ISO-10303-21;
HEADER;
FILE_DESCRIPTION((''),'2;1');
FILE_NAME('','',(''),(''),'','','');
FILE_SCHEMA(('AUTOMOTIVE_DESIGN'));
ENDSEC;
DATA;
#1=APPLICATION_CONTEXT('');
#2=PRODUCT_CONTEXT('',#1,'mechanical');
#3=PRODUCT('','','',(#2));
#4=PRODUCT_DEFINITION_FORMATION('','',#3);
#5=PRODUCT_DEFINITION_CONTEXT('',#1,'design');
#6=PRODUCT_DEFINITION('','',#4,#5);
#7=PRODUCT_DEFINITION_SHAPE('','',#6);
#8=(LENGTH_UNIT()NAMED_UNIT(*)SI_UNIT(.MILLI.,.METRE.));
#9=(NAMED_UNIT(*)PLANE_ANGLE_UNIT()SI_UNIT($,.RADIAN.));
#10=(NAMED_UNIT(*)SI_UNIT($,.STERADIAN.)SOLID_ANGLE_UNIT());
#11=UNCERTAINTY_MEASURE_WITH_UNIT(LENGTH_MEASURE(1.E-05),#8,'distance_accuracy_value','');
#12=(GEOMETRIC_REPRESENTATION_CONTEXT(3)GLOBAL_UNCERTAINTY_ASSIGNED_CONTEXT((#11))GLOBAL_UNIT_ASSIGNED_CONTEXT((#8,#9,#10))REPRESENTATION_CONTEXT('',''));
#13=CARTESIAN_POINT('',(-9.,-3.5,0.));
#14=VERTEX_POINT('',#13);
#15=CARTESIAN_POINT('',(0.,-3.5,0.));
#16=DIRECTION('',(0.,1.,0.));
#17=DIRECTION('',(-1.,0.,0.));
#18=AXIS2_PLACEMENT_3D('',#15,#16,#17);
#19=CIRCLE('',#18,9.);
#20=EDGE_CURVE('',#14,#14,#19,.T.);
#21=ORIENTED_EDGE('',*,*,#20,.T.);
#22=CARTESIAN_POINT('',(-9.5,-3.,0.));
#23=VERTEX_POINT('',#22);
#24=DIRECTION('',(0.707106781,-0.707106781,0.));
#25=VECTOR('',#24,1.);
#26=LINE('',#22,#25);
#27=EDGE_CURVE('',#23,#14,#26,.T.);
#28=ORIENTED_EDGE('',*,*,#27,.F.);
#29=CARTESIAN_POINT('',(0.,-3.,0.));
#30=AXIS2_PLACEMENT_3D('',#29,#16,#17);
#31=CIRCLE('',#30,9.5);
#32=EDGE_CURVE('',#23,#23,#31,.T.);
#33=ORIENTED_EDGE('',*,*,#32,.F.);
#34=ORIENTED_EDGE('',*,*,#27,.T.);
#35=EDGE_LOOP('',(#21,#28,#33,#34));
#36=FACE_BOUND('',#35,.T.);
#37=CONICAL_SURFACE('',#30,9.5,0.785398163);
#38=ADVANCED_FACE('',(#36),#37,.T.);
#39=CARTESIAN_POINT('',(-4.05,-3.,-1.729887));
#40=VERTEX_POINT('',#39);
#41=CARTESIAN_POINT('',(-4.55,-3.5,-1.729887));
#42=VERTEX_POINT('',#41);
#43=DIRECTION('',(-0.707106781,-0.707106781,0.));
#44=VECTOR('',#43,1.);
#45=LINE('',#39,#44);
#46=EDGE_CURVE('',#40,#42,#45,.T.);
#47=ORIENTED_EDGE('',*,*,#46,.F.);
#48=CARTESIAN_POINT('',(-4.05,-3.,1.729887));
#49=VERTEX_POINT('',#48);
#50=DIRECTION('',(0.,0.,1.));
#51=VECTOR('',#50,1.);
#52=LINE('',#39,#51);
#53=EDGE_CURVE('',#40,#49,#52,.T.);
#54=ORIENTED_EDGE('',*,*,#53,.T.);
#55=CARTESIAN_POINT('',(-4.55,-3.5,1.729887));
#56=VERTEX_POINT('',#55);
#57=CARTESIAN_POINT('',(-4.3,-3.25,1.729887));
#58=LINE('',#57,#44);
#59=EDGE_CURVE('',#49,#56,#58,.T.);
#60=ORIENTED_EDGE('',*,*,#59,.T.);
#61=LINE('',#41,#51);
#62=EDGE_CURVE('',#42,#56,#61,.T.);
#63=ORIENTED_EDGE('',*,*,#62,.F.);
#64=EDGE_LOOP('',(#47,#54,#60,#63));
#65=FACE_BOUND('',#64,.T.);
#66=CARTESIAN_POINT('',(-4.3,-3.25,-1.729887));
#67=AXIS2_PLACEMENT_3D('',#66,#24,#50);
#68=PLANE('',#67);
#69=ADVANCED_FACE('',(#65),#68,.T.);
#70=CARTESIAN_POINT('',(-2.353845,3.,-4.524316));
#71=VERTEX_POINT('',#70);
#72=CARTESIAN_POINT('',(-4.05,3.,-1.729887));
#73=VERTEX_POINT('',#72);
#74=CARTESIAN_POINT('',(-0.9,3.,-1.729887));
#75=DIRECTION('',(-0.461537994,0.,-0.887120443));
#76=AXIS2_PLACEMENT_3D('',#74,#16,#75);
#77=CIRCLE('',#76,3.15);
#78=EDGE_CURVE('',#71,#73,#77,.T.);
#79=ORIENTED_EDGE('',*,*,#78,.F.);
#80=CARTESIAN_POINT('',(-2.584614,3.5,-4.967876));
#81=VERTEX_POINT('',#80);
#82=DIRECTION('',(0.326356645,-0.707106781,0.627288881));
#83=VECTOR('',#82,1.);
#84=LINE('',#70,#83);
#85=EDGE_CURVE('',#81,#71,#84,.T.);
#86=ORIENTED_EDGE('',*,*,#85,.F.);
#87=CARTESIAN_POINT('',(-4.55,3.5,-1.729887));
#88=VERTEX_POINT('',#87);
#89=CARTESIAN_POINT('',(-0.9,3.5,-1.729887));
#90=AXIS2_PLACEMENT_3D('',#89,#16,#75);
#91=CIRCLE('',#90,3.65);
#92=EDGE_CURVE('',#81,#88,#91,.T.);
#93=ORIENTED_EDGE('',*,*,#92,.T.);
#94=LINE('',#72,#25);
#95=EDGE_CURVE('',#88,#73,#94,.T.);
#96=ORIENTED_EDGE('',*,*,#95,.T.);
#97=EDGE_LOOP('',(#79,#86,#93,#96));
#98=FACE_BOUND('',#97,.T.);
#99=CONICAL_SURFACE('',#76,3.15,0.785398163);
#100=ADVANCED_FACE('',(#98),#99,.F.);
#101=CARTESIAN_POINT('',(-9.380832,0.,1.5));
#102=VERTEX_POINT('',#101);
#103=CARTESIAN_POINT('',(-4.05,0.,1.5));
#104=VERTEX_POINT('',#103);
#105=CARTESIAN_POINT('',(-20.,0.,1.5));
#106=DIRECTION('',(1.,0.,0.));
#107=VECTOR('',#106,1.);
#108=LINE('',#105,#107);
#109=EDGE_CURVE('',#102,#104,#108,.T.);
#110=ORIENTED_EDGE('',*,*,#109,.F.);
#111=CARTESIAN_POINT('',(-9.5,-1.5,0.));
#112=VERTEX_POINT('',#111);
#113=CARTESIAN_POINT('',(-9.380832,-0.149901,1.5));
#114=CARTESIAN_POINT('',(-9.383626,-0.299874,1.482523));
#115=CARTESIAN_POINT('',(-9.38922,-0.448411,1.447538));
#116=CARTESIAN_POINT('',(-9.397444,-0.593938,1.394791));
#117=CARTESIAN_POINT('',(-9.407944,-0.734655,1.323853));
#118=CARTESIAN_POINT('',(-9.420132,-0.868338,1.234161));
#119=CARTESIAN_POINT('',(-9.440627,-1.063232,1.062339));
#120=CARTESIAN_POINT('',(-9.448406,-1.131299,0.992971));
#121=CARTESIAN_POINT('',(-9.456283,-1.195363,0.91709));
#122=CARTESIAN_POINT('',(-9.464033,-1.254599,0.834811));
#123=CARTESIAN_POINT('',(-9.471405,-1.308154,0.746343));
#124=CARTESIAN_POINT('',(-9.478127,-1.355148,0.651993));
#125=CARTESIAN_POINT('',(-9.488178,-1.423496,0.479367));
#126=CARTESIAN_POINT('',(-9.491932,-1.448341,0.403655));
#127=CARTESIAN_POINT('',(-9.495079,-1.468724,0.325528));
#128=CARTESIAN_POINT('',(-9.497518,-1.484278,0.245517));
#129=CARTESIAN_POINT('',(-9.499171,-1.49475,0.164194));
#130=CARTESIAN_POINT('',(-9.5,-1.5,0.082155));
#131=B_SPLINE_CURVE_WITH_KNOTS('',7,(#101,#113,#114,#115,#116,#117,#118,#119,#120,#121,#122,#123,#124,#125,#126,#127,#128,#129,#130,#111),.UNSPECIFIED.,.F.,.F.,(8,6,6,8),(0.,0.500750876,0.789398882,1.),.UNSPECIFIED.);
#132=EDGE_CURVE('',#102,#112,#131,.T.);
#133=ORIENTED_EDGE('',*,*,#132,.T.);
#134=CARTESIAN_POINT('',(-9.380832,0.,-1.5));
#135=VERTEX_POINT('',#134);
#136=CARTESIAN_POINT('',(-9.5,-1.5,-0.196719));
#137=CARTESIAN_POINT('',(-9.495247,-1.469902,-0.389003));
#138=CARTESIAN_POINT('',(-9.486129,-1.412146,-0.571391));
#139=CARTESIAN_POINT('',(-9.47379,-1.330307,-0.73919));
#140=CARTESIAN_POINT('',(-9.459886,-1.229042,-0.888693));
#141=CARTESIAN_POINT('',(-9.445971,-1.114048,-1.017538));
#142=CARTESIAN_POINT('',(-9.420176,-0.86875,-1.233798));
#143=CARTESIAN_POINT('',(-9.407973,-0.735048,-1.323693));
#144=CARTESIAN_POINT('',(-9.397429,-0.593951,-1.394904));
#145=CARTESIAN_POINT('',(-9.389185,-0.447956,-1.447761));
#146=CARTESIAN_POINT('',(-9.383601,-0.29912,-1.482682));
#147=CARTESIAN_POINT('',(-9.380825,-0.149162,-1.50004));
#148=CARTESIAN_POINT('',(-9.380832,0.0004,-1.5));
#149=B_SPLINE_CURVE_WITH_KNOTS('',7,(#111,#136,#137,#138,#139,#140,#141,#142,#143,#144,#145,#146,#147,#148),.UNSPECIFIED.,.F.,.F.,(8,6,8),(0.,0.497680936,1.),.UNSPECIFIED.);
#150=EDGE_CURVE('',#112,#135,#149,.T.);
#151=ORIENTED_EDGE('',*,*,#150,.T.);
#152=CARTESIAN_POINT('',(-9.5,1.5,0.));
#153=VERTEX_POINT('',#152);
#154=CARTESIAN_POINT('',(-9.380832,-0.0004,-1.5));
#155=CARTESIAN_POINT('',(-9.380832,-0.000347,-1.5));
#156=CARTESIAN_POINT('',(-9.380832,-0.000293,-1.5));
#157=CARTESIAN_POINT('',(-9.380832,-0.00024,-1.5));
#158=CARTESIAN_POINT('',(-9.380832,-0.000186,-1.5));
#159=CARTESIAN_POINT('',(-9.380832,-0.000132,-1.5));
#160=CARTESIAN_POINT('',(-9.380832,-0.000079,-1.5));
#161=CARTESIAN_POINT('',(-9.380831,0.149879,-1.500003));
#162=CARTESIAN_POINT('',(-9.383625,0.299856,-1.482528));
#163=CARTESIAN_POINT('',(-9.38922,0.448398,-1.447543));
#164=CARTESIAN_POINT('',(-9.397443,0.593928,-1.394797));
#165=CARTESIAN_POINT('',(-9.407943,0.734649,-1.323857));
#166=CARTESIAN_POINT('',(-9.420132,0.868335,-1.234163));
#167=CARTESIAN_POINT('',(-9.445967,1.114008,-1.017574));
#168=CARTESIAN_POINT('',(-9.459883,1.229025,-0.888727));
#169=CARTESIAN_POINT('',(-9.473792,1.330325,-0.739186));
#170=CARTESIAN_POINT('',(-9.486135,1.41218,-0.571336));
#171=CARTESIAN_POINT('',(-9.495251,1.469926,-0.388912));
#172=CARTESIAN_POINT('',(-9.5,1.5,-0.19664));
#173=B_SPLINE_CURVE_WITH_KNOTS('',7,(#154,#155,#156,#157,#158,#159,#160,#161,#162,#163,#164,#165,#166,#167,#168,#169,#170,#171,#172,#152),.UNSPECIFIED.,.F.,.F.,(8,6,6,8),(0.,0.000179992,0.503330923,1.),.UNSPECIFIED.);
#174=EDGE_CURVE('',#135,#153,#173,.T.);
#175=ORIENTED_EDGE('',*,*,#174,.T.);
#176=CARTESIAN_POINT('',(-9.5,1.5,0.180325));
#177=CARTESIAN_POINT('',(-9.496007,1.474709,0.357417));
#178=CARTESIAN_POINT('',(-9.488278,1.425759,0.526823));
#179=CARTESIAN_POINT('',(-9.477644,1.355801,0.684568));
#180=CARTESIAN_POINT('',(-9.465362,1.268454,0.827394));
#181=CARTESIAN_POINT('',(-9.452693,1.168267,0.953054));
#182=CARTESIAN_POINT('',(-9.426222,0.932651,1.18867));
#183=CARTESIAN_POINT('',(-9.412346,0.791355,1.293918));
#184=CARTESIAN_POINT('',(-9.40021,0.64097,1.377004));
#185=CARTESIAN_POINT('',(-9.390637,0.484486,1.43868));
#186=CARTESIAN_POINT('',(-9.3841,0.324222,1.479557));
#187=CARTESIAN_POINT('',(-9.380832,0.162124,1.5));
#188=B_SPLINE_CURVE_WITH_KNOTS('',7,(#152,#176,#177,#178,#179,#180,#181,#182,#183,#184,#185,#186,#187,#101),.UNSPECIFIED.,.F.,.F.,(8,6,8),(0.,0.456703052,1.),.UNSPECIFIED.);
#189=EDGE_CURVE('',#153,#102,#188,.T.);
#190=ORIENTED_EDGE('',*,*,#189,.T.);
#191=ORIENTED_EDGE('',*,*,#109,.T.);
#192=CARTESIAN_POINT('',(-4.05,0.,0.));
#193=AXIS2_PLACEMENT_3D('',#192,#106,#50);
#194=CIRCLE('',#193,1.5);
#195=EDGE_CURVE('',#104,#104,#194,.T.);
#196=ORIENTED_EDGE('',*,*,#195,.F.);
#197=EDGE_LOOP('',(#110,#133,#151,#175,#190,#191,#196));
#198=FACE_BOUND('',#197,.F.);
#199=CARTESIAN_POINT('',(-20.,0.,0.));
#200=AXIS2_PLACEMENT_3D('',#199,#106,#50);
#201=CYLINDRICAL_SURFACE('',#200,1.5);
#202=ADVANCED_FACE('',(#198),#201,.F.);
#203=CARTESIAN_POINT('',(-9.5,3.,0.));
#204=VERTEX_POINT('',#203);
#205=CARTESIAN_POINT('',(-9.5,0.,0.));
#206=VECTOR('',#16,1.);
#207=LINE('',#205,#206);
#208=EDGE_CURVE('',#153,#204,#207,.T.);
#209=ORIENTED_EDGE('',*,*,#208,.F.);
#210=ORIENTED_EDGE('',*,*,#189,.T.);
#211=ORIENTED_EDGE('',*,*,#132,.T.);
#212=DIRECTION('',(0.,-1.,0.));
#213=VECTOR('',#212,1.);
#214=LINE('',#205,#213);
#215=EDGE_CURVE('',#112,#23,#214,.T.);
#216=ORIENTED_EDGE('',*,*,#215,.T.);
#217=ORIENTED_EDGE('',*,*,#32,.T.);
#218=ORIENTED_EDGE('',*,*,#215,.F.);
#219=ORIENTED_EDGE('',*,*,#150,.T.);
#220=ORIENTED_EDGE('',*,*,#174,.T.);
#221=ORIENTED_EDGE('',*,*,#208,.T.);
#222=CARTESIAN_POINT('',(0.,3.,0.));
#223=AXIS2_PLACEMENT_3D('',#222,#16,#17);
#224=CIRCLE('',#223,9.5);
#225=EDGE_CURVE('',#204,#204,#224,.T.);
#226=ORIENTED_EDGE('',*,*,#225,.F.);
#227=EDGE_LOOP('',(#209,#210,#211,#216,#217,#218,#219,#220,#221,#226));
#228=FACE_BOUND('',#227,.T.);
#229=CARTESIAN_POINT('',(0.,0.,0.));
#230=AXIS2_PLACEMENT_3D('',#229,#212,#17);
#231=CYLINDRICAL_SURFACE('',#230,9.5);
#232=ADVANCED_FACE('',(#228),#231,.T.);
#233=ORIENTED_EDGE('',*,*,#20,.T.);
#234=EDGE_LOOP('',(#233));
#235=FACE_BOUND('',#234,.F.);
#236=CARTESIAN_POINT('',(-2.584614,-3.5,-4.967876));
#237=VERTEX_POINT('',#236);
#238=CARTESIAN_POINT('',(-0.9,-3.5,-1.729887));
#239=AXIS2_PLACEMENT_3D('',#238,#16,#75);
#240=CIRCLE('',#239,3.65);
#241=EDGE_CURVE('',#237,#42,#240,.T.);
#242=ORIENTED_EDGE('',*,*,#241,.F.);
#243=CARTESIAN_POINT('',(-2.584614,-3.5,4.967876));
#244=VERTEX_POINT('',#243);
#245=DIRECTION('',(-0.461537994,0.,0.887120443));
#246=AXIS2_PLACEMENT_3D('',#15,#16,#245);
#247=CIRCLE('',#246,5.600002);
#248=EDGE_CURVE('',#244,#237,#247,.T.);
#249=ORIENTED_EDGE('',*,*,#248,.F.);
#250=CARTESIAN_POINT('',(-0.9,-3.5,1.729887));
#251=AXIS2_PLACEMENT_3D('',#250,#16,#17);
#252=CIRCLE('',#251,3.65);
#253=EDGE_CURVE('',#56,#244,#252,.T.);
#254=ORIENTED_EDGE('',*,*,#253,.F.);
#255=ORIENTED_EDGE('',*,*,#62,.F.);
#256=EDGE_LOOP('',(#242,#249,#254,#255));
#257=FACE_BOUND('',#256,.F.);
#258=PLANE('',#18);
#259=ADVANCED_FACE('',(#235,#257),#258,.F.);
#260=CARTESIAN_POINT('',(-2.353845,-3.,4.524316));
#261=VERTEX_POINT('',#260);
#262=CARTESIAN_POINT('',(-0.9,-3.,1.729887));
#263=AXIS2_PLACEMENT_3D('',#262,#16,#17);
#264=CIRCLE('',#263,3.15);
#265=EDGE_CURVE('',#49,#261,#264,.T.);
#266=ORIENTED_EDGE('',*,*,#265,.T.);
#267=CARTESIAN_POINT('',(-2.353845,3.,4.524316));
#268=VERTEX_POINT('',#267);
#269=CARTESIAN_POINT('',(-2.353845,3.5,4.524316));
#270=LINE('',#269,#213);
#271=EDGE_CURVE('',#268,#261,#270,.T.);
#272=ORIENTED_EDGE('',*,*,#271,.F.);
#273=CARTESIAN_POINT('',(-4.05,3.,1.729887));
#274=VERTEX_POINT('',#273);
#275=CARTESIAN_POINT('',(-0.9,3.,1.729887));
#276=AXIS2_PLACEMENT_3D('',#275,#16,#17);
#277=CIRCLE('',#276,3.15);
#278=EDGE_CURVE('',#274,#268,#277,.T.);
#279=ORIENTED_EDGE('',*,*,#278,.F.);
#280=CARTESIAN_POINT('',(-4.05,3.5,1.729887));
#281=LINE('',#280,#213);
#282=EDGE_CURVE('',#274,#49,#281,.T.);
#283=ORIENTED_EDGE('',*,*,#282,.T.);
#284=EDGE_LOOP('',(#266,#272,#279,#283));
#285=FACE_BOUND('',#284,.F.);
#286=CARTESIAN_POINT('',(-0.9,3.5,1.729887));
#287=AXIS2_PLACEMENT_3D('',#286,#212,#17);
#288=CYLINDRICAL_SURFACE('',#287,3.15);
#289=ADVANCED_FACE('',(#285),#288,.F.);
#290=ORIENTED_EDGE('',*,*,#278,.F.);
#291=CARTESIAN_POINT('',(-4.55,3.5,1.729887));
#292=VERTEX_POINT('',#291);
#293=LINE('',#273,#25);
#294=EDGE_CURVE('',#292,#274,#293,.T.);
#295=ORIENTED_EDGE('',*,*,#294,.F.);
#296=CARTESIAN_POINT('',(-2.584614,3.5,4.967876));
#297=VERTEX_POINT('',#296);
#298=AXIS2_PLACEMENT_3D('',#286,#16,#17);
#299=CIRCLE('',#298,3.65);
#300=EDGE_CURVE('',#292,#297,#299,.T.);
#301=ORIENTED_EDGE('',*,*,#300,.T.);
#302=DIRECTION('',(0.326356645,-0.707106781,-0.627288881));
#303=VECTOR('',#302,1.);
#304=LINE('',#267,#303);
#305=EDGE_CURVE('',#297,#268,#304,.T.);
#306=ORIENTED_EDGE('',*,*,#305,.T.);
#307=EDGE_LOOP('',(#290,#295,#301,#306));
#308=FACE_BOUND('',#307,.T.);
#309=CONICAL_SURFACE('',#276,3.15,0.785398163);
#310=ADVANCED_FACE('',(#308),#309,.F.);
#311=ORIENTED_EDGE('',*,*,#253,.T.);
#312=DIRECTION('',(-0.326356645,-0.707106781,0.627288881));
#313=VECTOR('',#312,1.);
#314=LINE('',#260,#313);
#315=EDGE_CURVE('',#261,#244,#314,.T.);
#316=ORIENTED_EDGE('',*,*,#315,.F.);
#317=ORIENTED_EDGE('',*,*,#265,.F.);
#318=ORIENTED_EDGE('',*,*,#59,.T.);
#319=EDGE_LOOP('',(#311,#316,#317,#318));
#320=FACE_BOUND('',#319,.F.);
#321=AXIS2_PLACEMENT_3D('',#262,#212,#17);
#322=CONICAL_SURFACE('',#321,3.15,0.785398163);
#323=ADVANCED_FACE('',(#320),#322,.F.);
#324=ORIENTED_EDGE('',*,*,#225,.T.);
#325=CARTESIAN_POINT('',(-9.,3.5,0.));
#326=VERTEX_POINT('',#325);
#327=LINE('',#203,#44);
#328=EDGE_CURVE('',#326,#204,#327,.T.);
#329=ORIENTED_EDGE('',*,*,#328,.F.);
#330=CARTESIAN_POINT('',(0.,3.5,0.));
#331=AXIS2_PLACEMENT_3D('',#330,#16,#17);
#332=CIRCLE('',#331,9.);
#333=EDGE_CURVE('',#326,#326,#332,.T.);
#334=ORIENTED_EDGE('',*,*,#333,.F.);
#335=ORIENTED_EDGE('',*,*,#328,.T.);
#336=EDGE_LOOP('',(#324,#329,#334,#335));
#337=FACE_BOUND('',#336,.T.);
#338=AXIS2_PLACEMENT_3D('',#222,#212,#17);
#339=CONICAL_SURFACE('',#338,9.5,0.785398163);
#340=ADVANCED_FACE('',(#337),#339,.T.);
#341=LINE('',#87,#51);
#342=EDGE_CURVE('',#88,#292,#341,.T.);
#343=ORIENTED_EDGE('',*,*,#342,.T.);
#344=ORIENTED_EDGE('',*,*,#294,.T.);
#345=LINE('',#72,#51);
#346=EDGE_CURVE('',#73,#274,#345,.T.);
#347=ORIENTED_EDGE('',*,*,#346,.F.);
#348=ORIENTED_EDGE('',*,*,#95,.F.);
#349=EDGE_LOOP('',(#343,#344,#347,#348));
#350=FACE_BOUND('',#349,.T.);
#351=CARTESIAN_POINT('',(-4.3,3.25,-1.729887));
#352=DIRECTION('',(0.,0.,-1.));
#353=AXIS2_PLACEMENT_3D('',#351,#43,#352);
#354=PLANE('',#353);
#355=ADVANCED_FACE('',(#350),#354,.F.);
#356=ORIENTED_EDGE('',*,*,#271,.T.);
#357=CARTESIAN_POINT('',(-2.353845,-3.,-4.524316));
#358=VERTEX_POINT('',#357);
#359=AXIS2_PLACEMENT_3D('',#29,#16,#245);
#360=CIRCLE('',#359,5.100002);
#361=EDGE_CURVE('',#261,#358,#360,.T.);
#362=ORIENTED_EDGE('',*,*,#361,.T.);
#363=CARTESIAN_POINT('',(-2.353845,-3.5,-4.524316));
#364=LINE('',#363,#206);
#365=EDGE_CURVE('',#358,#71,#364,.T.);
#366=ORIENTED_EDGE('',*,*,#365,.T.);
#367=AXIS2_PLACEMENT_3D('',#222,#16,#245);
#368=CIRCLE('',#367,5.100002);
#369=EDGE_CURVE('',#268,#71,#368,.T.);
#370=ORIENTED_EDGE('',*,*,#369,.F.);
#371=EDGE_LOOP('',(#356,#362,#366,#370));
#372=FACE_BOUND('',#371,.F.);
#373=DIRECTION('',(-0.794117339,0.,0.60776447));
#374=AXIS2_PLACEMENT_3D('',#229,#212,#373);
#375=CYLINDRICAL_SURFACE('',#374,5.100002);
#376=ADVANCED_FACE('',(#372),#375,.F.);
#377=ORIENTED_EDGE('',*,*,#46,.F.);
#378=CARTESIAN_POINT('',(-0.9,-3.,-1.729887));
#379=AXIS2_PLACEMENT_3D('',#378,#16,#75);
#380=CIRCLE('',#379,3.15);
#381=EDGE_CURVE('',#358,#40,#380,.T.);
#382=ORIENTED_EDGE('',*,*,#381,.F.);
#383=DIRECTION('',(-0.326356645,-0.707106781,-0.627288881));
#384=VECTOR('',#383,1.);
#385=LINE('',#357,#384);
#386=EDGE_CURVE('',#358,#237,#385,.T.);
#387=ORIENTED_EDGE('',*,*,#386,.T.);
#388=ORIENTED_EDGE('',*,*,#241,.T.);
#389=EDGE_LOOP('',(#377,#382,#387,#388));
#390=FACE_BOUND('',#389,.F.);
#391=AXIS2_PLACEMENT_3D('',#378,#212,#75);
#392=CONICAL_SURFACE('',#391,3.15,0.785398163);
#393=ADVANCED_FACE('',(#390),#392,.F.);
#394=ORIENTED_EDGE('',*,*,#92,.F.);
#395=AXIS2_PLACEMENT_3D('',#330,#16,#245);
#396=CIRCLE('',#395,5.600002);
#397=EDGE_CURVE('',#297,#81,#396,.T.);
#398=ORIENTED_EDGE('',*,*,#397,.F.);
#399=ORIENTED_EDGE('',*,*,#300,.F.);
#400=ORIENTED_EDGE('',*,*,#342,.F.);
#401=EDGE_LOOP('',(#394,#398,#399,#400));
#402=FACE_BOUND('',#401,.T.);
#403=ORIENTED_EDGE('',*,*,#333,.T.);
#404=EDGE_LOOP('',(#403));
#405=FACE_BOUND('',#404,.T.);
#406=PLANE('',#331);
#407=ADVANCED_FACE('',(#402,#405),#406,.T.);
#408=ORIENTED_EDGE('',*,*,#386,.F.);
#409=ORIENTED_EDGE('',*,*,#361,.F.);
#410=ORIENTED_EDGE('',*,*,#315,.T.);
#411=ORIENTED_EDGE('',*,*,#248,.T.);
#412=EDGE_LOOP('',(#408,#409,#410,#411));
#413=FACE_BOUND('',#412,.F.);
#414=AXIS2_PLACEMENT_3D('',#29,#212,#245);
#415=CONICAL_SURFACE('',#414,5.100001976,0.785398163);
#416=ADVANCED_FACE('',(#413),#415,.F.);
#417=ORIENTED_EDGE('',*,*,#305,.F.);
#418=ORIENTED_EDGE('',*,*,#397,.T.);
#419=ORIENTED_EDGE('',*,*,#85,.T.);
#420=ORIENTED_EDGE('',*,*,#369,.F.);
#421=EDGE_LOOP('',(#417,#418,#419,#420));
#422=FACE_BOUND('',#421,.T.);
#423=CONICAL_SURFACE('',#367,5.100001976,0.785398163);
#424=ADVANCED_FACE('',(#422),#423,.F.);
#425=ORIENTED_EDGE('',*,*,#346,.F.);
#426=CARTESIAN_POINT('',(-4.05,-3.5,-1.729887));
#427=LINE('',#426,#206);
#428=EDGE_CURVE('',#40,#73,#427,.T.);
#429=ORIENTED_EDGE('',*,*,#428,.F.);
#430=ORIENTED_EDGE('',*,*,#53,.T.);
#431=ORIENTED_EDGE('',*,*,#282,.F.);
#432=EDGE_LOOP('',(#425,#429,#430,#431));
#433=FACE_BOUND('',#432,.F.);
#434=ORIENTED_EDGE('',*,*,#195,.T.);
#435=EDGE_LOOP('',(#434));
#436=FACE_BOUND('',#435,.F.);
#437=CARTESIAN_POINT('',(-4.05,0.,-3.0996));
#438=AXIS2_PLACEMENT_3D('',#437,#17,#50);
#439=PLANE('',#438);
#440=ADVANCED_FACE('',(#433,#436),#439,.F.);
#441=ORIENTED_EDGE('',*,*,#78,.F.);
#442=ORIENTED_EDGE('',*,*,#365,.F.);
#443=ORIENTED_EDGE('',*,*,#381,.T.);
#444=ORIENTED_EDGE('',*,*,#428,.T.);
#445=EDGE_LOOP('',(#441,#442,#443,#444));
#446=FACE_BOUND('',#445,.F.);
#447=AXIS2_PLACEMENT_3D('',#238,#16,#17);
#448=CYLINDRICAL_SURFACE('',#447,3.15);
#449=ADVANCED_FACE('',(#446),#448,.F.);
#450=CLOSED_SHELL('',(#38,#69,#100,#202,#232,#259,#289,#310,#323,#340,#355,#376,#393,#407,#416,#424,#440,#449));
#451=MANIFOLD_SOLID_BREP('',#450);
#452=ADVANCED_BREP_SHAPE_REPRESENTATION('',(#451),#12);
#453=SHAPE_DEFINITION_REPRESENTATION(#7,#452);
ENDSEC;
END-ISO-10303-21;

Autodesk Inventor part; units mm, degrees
ref_plane "XZ Plane" through (0, 0, 0) normal (0, 1, 0) x (-1, 0, 0)
ref_plane "XY Plane" through (0, 0, 0) normal (0, 0, 1) x (1, 0, 0)
sketch "Body Cross Section" plane through (0, 0, 0) normal (0, 1, 0) x (-1, 0, 0)
  circle A0 centre (0, 0) radius 9.5
  arc A1 (4.05, 3.0996) -> (4.05, -3.0996) centre (0, 0) ccw
  line L0 (4.05, -3.0996) -> (4.05, 3.0996)
  dimension "d0" = 19
  dimension "d1" = 10.2
  dimension "d2" = 4.05
extrude "Body" add sketch "Body Cross Section" along normal mid plane 7
ref_plane "Hole Work Plane" through (-20, 0, 0) normal (1, 0, 0) x (0, 1, 0)
sketch "Cable Hole Position" plane through (-20, 0, 0) normal (1, 0, 0) x (0, 1, 0)
  point P0 (0, 0)
  point P1 (0, 0)
hole "Cable Hole" at (-20, 0, 0) direction (1, 0, 0) diameter 3 end up to surface
fillet "Internal Fillet" radius 3.15 2 edges at (-4.05, 0, -3.0996) (-4.05, 0, 3.0996)
chamfer "Safety Chamfer" distance 0.5 angle 45 10 edges at (-3.5928, 3.5, 3.3643) (5.1, 3.5, 0) (-3.5928, 3.5, -3.3643) (-4.05, 3.5, 0) (5.1, -3.5, 0) (-3.5928, -3.5, -3.3643) (-4.05, -3.5, 0) (-3.5928, -3.5, 3.3643) (9.5, 3.5, 0) (9.5, -3.5, 0)
properties part number "Spacer" material "Aluminum 6061"
